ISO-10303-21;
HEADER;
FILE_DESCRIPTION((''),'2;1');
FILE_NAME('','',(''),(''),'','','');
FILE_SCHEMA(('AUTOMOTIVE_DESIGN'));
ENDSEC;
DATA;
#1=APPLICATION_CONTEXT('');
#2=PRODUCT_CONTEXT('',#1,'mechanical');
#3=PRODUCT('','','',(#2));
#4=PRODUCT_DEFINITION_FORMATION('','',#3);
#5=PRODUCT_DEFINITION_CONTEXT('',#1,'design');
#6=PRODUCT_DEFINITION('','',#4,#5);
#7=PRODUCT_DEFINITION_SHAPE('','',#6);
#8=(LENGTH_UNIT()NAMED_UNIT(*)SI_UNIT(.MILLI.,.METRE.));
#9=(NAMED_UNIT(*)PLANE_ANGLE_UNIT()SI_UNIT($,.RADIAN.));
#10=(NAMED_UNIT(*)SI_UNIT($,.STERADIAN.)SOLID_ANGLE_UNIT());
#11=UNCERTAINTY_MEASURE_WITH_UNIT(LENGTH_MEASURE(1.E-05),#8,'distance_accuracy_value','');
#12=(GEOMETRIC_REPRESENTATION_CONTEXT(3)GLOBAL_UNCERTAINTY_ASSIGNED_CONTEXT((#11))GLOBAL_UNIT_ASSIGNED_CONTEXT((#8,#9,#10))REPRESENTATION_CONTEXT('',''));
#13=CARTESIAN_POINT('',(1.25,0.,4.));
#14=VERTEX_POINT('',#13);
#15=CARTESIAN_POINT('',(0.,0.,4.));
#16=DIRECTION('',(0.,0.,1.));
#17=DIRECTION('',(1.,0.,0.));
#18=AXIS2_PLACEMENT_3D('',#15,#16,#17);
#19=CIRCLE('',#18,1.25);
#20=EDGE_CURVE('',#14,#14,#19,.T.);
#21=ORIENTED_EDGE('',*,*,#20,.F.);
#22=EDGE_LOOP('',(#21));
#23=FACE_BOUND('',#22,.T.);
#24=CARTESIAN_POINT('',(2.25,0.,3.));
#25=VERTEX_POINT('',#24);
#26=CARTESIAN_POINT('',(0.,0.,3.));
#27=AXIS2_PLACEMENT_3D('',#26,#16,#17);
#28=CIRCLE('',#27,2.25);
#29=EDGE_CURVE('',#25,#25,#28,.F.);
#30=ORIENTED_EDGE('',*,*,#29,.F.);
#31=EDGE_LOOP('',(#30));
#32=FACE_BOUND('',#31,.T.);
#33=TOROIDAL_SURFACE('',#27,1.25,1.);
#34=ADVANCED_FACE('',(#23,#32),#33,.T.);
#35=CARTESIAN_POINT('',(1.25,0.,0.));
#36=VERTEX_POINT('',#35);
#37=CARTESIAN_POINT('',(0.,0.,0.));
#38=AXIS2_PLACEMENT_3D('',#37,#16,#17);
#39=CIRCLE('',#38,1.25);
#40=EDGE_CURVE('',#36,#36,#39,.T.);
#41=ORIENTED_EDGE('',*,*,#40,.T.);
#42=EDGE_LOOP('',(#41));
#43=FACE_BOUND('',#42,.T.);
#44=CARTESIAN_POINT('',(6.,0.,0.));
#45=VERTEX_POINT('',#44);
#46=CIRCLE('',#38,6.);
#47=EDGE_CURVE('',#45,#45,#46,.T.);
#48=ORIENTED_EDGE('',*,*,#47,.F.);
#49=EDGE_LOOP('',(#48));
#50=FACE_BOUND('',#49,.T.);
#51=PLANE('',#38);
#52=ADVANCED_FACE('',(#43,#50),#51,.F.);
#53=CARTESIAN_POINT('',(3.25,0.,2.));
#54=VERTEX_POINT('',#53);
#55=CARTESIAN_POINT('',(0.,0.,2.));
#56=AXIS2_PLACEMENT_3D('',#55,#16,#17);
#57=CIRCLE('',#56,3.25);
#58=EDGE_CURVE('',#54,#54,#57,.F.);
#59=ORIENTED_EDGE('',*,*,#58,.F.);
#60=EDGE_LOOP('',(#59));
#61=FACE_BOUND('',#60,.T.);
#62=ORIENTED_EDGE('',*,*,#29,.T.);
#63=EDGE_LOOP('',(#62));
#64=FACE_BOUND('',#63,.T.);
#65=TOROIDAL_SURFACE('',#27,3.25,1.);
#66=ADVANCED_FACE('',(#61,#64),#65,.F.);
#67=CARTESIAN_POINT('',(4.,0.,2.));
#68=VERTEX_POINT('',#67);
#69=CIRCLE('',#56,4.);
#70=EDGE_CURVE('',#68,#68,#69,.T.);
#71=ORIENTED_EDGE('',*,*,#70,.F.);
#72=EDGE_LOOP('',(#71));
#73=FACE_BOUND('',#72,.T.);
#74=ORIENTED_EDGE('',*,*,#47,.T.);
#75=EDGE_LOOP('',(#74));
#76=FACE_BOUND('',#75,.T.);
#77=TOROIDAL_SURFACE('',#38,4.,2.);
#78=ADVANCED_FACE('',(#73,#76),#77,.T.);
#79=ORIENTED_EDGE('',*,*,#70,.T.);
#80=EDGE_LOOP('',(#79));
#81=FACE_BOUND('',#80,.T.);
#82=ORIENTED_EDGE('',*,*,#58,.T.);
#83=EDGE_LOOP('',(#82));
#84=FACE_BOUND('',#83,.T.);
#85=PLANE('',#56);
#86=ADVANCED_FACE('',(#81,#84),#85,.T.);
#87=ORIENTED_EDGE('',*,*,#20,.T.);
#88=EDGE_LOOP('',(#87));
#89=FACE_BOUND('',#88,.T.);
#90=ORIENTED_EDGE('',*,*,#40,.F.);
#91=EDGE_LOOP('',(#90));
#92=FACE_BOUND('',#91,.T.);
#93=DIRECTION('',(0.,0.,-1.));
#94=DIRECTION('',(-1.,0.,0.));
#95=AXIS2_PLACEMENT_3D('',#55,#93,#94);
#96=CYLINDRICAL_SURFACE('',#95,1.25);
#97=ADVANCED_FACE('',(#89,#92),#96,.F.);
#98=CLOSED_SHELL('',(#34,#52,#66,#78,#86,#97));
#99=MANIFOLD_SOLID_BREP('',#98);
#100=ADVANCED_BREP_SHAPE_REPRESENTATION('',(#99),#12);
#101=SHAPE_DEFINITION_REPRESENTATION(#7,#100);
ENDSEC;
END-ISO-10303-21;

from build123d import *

# Parameters (mm, degrees)
SKETCH1_R           = 6
SKETCH1_R_2         = 1.25
BOSS_EXTRUDE1_DEPTH = 2
SKETCH2_R           = 2.25
SKETCH2_R_2         = 1.25
BOSS_EXTRUDE2_DEPTH = 2
FILLET1_R           = 1
FILLET2_R           = 2


with BuildPart() as part:
    # Sketch1 → Boss-Extrude1 (new body)
    with BuildSketch(Plane.XY):
        Circle(SKETCH1_R)
        Circle(SKETCH1_R_2, mode=Mode.SUBTRACT)
    extrude(amount=BOSS_EXTRUDE1_DEPTH)

    # Sketch2 → Boss-Extrude2 (add)
    with BuildSketch(Plane.XY.offset(2)):
        Circle(SKETCH2_R)
        Circle(SKETCH2_R_2, mode=Mode.SUBTRACT)
    extrude(amount=BOSS_EXTRUDE2_DEPTH)

    # Fillet1
    fillet1_edges = [part.edges().sort_by_distance(p)[0] for p in [
        (-2.25, 0, 4),
        (-2.25, 0, 2),
    ]]
    fillet(fillet1_edges, radius=FILLET1_R - 0.0001)  # a hair under: the kernel refuses the full size

    # Fillet2
    fillet2_edges = [part.edges().sort_by_distance(p)[0] for p in [
        (-6, 0, 2),
    ]]
    fillet(fillet2_edges, radius=FILLET2_R - 0.0001)  # a hair under: the kernel refuses the full size


solid = part.part
